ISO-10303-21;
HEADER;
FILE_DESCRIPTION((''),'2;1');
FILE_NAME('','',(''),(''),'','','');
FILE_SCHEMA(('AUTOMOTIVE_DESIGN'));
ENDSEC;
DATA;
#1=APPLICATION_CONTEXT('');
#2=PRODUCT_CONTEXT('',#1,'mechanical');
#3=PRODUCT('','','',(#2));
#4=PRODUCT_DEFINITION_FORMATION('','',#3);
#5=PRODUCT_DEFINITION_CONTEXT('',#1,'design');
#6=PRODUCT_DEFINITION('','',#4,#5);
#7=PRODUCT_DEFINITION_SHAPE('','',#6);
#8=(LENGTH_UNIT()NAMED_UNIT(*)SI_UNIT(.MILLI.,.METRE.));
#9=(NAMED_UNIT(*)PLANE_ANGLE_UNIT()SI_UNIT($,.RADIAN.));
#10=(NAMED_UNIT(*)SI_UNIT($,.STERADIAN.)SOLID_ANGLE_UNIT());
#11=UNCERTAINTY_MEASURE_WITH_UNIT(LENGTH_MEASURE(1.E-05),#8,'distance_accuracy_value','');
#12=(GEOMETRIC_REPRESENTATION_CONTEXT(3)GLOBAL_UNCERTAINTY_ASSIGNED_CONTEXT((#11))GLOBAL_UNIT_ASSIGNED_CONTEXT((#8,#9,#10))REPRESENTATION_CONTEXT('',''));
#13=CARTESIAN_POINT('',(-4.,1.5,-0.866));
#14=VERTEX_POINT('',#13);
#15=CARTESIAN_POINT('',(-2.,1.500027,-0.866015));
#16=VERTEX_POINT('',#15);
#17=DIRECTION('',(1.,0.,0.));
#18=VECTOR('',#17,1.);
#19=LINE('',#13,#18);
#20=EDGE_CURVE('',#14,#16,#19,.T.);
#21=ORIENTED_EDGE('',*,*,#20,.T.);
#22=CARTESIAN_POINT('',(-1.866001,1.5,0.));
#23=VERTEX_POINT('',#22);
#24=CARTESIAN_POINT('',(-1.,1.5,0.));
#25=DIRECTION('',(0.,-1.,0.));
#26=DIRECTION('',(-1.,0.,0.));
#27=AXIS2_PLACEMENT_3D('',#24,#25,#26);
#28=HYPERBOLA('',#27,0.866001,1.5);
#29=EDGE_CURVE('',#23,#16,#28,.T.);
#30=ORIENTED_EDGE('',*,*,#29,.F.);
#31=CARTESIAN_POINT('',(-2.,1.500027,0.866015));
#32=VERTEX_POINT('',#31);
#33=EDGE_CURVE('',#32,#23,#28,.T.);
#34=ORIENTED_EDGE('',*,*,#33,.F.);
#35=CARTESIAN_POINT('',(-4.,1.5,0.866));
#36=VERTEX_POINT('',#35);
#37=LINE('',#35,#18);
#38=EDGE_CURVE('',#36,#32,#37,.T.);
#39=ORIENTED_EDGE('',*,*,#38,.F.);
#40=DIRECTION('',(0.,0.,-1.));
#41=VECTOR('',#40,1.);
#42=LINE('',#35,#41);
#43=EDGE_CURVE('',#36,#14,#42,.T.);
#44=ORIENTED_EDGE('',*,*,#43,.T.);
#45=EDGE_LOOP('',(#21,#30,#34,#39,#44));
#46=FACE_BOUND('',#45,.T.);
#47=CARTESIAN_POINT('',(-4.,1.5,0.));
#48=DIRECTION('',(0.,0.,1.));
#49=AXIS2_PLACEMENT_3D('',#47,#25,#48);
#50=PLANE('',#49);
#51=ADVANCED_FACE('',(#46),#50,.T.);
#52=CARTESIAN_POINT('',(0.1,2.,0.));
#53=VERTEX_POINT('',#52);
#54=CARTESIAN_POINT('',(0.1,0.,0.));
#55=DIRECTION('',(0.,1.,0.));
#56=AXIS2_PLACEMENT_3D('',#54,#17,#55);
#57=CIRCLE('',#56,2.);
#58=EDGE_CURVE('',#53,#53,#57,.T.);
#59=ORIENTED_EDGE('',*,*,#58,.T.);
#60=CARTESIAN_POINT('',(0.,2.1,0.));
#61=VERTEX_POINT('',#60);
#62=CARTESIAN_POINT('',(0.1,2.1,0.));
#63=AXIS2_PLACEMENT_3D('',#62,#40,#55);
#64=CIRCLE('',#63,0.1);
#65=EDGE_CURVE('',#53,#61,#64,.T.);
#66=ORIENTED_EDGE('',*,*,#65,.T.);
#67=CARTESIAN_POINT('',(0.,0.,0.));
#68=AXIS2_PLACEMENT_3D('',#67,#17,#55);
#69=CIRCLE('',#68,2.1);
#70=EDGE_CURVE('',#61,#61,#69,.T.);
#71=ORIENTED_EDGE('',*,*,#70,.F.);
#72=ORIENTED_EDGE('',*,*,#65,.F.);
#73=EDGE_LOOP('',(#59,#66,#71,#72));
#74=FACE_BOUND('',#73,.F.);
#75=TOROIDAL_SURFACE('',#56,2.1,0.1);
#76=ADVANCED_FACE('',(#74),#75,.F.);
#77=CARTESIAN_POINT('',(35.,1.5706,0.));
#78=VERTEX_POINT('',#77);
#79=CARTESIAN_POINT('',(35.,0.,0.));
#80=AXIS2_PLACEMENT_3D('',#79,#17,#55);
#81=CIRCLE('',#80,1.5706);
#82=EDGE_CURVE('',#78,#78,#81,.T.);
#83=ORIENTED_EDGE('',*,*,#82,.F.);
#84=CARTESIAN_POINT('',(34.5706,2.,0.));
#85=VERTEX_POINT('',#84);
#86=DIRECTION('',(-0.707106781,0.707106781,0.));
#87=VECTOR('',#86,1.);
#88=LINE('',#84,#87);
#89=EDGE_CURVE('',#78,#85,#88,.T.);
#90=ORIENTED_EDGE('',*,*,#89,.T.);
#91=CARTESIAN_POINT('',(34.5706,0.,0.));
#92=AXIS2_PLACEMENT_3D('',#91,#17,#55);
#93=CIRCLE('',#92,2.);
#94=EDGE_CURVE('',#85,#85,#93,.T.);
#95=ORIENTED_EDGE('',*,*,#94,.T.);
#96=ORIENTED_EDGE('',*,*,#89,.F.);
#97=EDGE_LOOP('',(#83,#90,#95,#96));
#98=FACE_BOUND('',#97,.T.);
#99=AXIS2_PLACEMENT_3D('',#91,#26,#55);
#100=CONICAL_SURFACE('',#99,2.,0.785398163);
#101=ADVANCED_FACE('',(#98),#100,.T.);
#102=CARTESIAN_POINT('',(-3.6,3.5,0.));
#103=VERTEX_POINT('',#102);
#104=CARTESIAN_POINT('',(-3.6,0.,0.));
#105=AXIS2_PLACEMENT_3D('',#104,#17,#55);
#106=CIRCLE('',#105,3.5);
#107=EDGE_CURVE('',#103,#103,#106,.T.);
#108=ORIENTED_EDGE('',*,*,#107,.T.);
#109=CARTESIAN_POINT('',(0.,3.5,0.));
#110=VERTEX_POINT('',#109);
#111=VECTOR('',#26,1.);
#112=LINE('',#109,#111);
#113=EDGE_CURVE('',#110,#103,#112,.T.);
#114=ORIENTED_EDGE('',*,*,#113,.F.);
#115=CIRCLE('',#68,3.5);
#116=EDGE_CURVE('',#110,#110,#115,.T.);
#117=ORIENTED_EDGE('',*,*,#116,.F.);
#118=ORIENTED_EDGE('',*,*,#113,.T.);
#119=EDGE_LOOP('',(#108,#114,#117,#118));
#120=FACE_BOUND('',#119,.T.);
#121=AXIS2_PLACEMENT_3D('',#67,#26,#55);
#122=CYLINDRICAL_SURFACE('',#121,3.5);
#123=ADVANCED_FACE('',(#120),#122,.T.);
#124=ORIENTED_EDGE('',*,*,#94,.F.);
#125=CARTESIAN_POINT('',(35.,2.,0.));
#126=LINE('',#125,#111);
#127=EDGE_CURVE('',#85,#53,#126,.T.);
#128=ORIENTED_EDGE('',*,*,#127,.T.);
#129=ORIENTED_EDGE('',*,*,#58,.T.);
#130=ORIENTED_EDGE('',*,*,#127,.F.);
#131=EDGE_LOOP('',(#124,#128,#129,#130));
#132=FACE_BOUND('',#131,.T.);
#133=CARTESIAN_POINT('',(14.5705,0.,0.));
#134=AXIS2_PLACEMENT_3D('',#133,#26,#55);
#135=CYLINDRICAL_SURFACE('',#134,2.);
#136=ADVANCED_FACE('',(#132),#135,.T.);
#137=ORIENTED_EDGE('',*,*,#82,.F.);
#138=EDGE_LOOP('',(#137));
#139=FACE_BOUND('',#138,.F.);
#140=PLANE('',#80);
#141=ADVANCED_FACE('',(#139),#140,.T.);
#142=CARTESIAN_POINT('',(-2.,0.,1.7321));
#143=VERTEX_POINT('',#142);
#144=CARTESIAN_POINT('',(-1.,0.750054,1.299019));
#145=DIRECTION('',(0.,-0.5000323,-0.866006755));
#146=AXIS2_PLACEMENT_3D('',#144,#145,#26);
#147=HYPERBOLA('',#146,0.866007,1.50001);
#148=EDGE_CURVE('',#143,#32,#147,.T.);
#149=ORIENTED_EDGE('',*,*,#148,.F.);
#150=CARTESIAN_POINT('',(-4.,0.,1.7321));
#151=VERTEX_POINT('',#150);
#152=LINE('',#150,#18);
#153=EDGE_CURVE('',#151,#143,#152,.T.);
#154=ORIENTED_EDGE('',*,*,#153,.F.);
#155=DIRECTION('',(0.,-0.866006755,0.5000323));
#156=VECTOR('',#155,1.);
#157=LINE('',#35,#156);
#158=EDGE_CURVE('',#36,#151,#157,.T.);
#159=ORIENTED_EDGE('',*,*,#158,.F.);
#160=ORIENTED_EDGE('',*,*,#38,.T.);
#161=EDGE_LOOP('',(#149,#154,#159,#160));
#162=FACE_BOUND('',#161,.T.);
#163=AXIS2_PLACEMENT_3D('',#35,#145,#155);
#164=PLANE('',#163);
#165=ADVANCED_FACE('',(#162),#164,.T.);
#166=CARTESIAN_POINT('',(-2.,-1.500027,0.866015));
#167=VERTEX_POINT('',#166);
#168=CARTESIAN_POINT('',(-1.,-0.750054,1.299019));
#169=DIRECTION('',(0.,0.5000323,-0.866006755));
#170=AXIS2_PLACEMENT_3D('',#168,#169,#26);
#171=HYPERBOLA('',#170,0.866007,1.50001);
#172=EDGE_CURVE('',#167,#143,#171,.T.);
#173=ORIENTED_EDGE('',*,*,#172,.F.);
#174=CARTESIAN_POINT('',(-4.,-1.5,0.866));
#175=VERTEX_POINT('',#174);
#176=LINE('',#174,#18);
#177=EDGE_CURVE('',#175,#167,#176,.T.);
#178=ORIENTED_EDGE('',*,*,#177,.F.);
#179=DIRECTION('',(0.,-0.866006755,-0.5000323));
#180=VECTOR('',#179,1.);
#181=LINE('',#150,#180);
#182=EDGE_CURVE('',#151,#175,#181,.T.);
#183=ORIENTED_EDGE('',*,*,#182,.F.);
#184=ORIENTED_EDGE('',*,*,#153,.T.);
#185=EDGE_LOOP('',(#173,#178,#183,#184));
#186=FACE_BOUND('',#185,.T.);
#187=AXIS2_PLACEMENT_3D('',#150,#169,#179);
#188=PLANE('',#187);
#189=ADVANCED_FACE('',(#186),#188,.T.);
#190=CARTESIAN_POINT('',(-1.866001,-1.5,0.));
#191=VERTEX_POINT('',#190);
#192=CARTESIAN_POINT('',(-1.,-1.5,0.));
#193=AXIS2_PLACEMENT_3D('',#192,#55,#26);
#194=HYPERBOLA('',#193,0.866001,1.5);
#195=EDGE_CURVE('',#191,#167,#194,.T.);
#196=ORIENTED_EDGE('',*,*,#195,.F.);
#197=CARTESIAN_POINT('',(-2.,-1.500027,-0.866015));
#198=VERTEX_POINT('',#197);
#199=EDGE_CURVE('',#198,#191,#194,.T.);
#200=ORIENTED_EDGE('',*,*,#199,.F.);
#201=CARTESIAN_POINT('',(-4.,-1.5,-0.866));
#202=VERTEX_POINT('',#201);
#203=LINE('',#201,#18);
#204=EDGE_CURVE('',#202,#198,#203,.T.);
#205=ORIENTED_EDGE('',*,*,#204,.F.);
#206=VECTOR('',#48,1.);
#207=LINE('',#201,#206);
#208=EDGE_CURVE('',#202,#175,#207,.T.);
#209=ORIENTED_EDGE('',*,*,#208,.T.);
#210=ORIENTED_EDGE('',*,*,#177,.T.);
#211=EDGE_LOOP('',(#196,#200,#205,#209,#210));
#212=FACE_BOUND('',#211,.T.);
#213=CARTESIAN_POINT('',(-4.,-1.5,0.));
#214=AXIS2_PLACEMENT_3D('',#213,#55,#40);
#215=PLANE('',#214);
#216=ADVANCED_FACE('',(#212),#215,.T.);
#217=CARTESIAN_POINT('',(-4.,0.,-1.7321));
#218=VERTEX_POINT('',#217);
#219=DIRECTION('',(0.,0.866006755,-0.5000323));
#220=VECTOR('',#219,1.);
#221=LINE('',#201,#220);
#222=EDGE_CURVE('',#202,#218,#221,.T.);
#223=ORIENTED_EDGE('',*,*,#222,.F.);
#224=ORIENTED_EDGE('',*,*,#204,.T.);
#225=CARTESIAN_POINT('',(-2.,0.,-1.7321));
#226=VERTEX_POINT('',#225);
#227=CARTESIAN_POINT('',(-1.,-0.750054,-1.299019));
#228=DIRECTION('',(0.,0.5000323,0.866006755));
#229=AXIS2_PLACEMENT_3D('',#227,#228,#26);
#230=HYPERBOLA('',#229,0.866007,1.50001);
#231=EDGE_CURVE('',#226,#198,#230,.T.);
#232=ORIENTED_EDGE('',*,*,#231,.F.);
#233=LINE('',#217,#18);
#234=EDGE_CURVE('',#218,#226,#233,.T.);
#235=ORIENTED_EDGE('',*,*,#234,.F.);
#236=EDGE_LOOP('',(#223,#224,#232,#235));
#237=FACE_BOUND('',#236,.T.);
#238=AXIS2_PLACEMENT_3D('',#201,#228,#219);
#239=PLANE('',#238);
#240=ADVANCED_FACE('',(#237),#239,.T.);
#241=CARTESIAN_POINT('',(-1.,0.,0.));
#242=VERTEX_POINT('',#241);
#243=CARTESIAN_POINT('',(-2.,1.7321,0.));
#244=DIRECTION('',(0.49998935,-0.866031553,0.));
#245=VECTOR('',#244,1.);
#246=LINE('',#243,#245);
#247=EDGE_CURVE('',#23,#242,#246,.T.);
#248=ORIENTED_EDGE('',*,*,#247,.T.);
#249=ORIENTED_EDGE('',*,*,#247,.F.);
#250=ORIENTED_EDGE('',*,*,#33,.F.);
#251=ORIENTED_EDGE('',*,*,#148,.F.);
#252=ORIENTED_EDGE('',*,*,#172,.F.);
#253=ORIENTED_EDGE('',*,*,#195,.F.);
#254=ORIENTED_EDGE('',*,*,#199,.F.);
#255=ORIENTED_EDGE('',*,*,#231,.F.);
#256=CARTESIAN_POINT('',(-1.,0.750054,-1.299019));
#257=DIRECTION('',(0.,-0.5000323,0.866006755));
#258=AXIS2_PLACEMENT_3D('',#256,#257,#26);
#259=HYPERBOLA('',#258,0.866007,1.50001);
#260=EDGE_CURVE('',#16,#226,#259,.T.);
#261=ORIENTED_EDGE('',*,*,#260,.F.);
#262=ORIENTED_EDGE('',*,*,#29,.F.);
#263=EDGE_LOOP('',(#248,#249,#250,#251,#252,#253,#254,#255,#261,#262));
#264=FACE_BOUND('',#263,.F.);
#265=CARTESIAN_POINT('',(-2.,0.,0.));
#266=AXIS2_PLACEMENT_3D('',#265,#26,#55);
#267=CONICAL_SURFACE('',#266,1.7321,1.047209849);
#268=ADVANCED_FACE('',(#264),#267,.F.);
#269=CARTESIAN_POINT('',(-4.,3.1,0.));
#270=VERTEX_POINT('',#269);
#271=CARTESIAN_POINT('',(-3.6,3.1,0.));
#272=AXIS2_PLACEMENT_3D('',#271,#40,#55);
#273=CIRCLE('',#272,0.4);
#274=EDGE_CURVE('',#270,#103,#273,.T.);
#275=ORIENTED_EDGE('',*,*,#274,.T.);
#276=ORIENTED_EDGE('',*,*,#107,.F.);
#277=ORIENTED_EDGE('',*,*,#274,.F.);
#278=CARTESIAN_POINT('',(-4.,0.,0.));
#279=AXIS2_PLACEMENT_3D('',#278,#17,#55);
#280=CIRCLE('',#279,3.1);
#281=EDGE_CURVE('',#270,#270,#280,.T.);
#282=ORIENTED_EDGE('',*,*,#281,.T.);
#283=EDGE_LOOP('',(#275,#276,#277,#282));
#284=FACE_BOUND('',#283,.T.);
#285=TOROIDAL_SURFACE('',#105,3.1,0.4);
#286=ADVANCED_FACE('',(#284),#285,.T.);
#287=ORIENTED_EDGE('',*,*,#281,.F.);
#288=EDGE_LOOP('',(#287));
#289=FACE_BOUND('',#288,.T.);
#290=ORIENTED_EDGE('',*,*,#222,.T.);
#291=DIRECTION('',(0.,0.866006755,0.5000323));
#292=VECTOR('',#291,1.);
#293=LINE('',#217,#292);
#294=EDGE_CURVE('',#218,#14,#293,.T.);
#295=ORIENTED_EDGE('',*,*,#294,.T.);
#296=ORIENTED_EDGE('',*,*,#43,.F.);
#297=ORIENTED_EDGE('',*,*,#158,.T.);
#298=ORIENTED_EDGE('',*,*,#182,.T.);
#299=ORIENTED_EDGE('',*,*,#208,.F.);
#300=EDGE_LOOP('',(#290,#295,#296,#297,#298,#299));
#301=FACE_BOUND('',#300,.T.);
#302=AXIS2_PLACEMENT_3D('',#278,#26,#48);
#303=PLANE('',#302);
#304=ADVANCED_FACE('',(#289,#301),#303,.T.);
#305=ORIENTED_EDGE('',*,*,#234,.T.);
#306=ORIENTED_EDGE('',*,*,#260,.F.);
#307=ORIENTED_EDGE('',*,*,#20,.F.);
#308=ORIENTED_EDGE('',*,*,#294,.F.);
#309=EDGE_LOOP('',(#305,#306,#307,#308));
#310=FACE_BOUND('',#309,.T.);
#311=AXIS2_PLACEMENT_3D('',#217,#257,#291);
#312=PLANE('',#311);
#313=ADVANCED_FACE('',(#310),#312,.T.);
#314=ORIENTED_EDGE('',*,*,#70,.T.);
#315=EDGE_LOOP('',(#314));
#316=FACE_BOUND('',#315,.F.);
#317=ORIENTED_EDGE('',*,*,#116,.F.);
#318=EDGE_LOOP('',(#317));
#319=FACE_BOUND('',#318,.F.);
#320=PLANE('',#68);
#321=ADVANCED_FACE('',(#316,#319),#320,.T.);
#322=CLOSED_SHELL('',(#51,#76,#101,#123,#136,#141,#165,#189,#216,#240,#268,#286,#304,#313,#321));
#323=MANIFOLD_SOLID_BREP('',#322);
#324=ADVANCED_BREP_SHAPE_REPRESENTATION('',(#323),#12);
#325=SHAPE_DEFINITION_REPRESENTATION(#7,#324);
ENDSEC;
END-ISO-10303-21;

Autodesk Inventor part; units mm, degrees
ref_plane "YZ Plane" through (0, 0, 0) normal (1, 0, 0) x (0, 1, 0)
ref_plane "XZ Plane" through (0, 0, 0) normal (0, 1, 0) x (-1, 0, 0)
sketch "Sketch1" plane through (0, 0, 0) normal (0, 0, 1) x (1, 0, 0)
  line L0 (-1, 0) -> (35, 0)
  line L1 (35, 0) -> (35, 2)
  line L2 (35, 2) -> (15, 2)
  line L3 (15, 2) -> (14.5705, 2)
  line L4 (14.5705, 2) -> (0, 2)
  line L5 (0, 2) -> (0, 3.5)
  line L6 (0, 3.5) -> (-4, 3.5)
  line L7 (-4, 3.5) -> (-4, 1.7321)
  line L8 (-4, 1.7321) -> (-2, 1.7321)
  line L9 (-2, 1.7321) -> (-1, 0)
  line L10 (-11.8, 0) -> (42.8, 0) projected
  line L11 (0, -0.7) -> (0, 4.2) projected
  line L12 (15, 2) -> (0, 2) construction
  dimension "d1" = 20
  dimension "d2" = 0.4295
  dimension "d3" = 4
  dimension "d4" = 2
  dimension "d5" = 60
  dimension "d6" = 4
  dimension "d7" = 4
  dimension "d8" = 3.4641
  dimension "d9" = 7
  dimension "d26" = 35
revolve "Body" add sketch "Sketch1" angle 360 about axis through (-1, 0, 0) along (1, 0, 0)
sketch "Sketch2" plane through (-4, 0, 0) normal (-1, 0, 0) x (0, 0, 1)
  circle A0 centre (0, 0) radius 1.7321 projected
  line L0 (0, -4.9) -> (0, 4.9) projected
  line L1 (-4.9, 0) -> (4.9, 0) projected
  line L2 (1.7321, 0) -> (0.866, -1.5)
  line L3 (0.866, -1.5) -> (-0.866, -1.5)
  line L4 (-0.866, -1.5) -> (-1.7321, 0)
  line L5 (-1.7321, 0) -> (-0.866, 1.5)
  line L6 (-0.866, 1.5) -> (0.866, 1.5)
  line L7 (0.866, 1.5) -> (1.7321, 0)
extrude "Slot" add sketch "Sketch2" against normal up to next contours L7 A0 | A0 L2 | L6 L0 A0 | A0 L0 L3 | L0 L6 A0 | A0 L3 L0 | L4 A0 | A0 L5
fillet "Fillet1" radius 0.4 1 edges at (-4, -3.5, 0)
thread "Thread" size "M4x0.7" class "6g" standard "ISO Metric profile" length 20
chamfer "Chamfer1" distance 0.4294 distance2 0.4294 1 edges at (35, -2, 0) measured on face at (35, 0.0262, -0.4421)
ref_plane "Work Plane1" through (29, 0, 0) normal (0, -1, 0) x (1, 0, 0)
fillet "Fillet2" radius 0.1 1 edges at (0, -2, 0)
equation "\"d30\" = R"
equation "\"d17\" = RR"
equation "\"d13\" = GEL"
equation "\"d15\" = -0.5 * SPD + 0.5 * GD"
equation "\"d16\" = GUL"
equation "\"d1\" = GEL"
equation "\"d3\" = KOH"
equation "\"d4\" = INTI"
equation "\"d6\" = GD"
equation "\"d7\" = BDM"
equation "\"d8\" = 1.1547 * SW"
equation "\"d9\" = KOD"
equation "\"d26\" = NLG"
equation "\"GD\" = 4"
equation "\"NLG\" = 35"
equation "\"GEL\" = 20"
equation "\"KOD\" = 7"
equation "\"KOH\" = 4"
equation "\"INTI\" = 2"
equation "\"GAL\" = 0.61345 * PTC"
equation "\"GUL\" = 0.61345 * PTC"
equation "\"BDM\" = NND"
equation "\"SW\" = 3"
equation "\"RR\" = 0.4"
equation "\"SPD\" = NND - 1.2269 * PTC"
equation "\"R\" = 0.1"
equation "\"TOA\" = 30deg"
equation "\"GD1\" = THREADDIA - 1.2269 * PTC"
equation "\"THREADDIA\" = 4"
equation "\"FAWI\" = 45deg"
equation "\"PTC\" = 0.7"
equation "\"NND\" = 4"
equation "\"E0\" = 1.155 * SW"
properties part number "ISO 4762  - M4 x 35" material "Stainless Steel, 440C"
